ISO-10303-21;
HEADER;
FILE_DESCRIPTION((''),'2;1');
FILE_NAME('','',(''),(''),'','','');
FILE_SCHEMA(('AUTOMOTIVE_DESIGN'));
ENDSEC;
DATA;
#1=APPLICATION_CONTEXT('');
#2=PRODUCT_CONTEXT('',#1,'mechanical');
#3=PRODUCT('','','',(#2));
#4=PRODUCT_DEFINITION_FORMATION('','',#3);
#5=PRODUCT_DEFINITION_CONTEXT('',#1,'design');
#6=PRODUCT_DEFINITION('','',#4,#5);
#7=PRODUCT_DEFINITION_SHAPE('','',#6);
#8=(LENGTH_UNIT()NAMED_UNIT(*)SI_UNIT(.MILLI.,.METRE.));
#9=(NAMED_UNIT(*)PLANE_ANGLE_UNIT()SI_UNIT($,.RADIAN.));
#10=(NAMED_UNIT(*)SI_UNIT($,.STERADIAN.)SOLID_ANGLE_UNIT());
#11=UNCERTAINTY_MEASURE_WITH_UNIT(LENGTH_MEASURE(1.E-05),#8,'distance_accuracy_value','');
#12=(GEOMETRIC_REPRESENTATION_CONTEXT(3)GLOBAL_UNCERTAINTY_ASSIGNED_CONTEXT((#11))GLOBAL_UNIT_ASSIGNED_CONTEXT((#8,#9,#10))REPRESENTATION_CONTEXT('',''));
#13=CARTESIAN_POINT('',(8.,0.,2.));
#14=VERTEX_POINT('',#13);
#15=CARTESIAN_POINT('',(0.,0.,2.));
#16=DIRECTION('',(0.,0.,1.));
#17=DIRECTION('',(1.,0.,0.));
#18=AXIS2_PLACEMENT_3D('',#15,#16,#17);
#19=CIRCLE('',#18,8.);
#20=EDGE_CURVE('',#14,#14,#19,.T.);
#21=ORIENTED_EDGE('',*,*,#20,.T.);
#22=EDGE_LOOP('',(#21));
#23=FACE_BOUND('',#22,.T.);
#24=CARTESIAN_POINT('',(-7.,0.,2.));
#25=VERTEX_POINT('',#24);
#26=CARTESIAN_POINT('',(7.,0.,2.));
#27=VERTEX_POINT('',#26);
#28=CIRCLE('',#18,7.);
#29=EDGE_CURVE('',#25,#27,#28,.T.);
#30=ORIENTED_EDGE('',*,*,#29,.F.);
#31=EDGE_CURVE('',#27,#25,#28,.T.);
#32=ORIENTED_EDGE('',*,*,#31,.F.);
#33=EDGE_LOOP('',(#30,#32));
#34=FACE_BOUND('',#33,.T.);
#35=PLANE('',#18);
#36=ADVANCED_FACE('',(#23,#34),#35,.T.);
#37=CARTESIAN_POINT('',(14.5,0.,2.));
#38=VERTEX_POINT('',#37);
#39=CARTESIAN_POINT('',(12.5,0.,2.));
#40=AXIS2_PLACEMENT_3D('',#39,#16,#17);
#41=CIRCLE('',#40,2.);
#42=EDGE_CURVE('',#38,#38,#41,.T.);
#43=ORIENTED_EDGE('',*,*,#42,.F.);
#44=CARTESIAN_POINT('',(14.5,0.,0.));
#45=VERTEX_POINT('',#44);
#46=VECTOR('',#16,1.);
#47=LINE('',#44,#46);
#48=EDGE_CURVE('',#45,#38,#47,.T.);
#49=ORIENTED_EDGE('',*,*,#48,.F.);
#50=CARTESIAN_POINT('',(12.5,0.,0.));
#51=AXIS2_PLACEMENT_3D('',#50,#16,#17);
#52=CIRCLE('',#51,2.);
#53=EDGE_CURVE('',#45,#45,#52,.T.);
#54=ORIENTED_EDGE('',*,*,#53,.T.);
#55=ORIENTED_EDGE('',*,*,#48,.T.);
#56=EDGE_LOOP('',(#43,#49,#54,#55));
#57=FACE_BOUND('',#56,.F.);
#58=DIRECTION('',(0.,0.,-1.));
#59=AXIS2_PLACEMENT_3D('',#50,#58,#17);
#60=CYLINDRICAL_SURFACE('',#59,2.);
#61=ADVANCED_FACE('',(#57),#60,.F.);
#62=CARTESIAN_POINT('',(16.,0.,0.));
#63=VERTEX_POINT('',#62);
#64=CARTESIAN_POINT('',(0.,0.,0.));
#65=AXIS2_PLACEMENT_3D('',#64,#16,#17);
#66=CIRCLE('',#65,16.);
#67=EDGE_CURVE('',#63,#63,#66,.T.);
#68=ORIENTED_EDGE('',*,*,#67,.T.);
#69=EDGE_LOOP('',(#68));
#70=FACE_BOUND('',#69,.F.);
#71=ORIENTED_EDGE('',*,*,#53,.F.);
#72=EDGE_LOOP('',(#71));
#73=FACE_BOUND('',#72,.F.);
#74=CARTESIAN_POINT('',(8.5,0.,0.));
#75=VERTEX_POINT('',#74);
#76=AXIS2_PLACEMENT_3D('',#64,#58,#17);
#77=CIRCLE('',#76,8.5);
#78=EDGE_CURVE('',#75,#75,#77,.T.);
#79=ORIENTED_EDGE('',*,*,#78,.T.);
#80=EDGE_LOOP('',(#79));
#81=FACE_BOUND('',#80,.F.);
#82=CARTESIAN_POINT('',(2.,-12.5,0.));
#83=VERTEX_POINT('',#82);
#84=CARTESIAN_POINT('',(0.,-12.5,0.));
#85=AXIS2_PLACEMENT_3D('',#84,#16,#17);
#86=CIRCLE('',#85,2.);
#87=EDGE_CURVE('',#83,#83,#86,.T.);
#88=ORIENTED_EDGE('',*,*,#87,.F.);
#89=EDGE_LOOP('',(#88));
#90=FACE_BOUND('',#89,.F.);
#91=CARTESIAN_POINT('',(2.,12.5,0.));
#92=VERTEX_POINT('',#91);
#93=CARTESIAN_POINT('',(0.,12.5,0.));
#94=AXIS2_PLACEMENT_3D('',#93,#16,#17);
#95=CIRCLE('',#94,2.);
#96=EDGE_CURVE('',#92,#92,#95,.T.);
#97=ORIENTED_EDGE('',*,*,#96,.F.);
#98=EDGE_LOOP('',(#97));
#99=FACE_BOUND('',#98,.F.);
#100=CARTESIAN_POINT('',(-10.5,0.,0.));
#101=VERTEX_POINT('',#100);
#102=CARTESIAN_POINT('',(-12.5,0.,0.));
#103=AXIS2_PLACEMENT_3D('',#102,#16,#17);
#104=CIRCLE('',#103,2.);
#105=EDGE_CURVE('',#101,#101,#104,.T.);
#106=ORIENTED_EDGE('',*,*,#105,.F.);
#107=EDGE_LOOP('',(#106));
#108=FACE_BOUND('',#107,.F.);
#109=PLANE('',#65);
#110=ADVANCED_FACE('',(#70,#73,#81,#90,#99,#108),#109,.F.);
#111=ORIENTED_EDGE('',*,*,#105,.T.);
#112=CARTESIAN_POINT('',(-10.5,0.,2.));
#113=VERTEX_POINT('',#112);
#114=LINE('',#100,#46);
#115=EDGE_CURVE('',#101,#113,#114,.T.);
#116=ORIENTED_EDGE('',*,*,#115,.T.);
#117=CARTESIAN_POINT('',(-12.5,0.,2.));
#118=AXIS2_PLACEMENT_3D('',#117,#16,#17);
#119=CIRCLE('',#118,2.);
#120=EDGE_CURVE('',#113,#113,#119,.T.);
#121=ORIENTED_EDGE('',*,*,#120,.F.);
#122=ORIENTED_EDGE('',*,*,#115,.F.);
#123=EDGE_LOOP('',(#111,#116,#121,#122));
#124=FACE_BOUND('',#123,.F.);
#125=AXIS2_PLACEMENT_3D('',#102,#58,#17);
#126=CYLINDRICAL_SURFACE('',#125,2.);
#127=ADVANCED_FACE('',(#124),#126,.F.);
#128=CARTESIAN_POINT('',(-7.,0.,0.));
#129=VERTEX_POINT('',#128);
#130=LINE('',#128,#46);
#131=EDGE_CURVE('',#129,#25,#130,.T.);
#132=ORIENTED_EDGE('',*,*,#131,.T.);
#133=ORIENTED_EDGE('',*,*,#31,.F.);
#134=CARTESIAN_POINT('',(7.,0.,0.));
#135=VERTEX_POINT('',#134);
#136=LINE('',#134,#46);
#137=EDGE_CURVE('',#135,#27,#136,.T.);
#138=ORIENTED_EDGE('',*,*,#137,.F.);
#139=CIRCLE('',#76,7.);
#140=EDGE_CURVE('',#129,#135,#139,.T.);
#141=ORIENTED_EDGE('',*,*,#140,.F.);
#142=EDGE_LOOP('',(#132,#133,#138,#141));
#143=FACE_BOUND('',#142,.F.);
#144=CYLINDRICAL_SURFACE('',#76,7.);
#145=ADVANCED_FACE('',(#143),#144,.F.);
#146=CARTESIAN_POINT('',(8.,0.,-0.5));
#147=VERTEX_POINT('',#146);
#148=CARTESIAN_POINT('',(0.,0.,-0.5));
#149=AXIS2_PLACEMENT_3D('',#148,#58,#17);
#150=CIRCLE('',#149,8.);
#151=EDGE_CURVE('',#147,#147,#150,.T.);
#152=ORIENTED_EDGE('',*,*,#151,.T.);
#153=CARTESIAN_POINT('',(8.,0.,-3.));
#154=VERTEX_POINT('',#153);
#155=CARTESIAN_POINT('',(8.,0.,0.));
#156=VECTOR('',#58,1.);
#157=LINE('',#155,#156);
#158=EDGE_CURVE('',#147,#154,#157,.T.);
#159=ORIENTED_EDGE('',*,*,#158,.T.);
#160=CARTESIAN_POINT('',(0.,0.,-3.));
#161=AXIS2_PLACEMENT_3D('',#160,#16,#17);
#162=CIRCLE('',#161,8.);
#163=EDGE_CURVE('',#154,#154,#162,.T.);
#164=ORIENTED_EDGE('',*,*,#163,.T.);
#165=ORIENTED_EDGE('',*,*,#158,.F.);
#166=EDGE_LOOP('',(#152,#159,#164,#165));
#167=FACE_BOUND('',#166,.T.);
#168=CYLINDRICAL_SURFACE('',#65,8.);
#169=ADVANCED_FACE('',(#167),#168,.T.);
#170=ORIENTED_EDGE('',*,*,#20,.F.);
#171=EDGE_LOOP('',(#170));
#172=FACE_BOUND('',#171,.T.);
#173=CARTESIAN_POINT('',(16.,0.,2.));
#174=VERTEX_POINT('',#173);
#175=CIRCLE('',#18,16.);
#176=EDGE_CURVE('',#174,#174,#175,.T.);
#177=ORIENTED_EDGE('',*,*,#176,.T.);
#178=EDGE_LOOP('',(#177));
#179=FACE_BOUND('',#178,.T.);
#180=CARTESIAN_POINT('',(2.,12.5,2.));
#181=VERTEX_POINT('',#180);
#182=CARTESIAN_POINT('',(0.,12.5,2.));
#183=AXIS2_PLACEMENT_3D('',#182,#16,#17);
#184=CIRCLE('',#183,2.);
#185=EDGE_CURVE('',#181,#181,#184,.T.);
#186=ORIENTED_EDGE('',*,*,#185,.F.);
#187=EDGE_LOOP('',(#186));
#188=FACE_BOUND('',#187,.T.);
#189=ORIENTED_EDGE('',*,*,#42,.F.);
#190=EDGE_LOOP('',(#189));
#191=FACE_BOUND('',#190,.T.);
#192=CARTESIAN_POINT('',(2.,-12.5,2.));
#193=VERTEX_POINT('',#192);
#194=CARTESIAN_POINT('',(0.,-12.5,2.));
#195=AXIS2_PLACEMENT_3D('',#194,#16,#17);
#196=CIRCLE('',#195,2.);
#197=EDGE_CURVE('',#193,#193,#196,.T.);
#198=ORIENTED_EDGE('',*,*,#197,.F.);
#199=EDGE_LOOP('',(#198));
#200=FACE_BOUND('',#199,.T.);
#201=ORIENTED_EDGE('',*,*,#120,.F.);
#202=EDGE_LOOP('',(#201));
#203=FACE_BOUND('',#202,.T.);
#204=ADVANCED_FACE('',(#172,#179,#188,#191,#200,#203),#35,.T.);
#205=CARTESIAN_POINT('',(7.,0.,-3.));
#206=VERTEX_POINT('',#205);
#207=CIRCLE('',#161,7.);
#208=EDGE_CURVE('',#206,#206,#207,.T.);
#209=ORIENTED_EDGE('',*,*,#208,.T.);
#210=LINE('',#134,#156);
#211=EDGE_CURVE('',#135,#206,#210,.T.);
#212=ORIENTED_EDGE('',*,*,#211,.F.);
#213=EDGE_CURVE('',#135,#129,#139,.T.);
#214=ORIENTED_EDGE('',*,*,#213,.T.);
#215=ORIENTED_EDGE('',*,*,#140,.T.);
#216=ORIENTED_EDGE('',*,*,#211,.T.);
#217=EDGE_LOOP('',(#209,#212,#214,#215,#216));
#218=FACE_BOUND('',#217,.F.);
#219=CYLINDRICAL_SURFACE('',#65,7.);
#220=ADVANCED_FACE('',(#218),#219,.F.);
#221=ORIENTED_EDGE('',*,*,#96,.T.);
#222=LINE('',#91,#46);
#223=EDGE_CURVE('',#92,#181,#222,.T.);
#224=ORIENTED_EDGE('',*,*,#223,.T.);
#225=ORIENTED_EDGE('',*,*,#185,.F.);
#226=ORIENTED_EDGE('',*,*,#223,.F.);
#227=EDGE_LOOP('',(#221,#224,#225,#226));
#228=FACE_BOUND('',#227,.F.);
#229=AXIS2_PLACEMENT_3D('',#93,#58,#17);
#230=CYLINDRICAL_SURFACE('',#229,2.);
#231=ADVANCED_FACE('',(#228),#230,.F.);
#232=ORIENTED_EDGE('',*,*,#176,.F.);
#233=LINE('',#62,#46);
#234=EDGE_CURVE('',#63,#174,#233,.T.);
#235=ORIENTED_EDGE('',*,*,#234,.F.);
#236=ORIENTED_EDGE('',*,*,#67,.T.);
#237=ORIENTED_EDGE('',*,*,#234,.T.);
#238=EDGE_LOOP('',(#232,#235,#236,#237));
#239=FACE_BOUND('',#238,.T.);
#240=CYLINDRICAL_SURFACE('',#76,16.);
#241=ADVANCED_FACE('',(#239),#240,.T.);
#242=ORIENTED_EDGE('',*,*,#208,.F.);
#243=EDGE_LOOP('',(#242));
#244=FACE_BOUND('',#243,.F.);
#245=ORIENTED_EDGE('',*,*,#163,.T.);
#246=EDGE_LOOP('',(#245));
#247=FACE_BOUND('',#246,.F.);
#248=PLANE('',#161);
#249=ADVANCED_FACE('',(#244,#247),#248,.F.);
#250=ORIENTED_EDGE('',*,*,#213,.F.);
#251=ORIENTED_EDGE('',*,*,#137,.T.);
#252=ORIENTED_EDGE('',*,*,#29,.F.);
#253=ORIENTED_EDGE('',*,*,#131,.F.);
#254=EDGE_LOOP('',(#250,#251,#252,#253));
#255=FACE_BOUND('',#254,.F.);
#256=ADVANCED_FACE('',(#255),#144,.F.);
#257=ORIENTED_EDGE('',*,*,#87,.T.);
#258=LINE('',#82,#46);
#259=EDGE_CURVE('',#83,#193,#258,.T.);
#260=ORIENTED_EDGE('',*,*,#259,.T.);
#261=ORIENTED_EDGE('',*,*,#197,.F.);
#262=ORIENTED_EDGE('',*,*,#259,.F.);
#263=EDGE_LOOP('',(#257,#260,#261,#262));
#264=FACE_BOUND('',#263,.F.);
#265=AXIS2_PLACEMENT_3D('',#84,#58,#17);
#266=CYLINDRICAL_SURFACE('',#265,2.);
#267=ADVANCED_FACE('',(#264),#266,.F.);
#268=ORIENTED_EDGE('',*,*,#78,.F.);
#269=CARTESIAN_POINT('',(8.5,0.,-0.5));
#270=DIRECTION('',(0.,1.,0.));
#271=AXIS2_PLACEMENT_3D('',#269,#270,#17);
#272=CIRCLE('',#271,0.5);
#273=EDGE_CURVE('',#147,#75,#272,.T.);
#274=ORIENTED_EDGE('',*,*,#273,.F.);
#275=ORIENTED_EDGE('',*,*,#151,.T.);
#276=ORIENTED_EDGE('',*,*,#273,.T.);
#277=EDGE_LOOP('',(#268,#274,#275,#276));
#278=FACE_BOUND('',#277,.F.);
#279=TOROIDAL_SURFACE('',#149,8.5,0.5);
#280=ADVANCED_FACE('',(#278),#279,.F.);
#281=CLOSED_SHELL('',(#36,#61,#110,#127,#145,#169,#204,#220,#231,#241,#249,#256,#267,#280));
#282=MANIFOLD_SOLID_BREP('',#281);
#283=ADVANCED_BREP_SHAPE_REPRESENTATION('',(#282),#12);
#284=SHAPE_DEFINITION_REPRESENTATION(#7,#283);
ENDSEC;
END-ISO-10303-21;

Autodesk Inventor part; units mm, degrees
ref_plane "YZ Plane" through (0, 0, 0) normal (1, 0, 0) x (0, 1, 0)
ref_plane "XZ Plane" through (0, 0, 0) normal (0, 1, 0) x (-1, 0, 0)
ref_plane "XY Plane" through (0, 0, 0) normal (0, 0, 1) x (1, 0, 0)
sketch "Sketch1" plane through (0, 0, 0) normal (0, 0, 1) x (1, 0, 0)
  circle A0 centre (0, 0) radius 7
  circle A1 centre (0, 0) radius 16
  circle A2 centre (-12.5, 0) radius 2
  circle A3 centre (0, -12.5) radius 2
  circle A4 centre (12.5, 0) radius 2
  circle A5 centre (0, 12.5) radius 2
  circle A6 centre (0, 0) radius 8
  line L0 (0, 0) -> (-12.5, 0)
  point P0 (-7, 0)
  point P1 (-7.7857, 1.8392)
  dimension "d0" = 14
  dimension "d8" = 16
  dimension "d1" = 32
  dimension "d2" = 4
  dimension "d5" = 360
  dimension "d15" = 12.5
extrude "Extrusion1" add sketch "Sketch1" along normal blind 2 contours A1
extrude "Extrusion2" add sketch "Sketch1" against normal blind 3 contours A6
extrude "Extrusion3" add sketch "Sketch1" along normal blind 2 contours A6
fillet "Fillet2" radius 0.5 1 edges at (-8, 0, 0)
properties part number "flange"
